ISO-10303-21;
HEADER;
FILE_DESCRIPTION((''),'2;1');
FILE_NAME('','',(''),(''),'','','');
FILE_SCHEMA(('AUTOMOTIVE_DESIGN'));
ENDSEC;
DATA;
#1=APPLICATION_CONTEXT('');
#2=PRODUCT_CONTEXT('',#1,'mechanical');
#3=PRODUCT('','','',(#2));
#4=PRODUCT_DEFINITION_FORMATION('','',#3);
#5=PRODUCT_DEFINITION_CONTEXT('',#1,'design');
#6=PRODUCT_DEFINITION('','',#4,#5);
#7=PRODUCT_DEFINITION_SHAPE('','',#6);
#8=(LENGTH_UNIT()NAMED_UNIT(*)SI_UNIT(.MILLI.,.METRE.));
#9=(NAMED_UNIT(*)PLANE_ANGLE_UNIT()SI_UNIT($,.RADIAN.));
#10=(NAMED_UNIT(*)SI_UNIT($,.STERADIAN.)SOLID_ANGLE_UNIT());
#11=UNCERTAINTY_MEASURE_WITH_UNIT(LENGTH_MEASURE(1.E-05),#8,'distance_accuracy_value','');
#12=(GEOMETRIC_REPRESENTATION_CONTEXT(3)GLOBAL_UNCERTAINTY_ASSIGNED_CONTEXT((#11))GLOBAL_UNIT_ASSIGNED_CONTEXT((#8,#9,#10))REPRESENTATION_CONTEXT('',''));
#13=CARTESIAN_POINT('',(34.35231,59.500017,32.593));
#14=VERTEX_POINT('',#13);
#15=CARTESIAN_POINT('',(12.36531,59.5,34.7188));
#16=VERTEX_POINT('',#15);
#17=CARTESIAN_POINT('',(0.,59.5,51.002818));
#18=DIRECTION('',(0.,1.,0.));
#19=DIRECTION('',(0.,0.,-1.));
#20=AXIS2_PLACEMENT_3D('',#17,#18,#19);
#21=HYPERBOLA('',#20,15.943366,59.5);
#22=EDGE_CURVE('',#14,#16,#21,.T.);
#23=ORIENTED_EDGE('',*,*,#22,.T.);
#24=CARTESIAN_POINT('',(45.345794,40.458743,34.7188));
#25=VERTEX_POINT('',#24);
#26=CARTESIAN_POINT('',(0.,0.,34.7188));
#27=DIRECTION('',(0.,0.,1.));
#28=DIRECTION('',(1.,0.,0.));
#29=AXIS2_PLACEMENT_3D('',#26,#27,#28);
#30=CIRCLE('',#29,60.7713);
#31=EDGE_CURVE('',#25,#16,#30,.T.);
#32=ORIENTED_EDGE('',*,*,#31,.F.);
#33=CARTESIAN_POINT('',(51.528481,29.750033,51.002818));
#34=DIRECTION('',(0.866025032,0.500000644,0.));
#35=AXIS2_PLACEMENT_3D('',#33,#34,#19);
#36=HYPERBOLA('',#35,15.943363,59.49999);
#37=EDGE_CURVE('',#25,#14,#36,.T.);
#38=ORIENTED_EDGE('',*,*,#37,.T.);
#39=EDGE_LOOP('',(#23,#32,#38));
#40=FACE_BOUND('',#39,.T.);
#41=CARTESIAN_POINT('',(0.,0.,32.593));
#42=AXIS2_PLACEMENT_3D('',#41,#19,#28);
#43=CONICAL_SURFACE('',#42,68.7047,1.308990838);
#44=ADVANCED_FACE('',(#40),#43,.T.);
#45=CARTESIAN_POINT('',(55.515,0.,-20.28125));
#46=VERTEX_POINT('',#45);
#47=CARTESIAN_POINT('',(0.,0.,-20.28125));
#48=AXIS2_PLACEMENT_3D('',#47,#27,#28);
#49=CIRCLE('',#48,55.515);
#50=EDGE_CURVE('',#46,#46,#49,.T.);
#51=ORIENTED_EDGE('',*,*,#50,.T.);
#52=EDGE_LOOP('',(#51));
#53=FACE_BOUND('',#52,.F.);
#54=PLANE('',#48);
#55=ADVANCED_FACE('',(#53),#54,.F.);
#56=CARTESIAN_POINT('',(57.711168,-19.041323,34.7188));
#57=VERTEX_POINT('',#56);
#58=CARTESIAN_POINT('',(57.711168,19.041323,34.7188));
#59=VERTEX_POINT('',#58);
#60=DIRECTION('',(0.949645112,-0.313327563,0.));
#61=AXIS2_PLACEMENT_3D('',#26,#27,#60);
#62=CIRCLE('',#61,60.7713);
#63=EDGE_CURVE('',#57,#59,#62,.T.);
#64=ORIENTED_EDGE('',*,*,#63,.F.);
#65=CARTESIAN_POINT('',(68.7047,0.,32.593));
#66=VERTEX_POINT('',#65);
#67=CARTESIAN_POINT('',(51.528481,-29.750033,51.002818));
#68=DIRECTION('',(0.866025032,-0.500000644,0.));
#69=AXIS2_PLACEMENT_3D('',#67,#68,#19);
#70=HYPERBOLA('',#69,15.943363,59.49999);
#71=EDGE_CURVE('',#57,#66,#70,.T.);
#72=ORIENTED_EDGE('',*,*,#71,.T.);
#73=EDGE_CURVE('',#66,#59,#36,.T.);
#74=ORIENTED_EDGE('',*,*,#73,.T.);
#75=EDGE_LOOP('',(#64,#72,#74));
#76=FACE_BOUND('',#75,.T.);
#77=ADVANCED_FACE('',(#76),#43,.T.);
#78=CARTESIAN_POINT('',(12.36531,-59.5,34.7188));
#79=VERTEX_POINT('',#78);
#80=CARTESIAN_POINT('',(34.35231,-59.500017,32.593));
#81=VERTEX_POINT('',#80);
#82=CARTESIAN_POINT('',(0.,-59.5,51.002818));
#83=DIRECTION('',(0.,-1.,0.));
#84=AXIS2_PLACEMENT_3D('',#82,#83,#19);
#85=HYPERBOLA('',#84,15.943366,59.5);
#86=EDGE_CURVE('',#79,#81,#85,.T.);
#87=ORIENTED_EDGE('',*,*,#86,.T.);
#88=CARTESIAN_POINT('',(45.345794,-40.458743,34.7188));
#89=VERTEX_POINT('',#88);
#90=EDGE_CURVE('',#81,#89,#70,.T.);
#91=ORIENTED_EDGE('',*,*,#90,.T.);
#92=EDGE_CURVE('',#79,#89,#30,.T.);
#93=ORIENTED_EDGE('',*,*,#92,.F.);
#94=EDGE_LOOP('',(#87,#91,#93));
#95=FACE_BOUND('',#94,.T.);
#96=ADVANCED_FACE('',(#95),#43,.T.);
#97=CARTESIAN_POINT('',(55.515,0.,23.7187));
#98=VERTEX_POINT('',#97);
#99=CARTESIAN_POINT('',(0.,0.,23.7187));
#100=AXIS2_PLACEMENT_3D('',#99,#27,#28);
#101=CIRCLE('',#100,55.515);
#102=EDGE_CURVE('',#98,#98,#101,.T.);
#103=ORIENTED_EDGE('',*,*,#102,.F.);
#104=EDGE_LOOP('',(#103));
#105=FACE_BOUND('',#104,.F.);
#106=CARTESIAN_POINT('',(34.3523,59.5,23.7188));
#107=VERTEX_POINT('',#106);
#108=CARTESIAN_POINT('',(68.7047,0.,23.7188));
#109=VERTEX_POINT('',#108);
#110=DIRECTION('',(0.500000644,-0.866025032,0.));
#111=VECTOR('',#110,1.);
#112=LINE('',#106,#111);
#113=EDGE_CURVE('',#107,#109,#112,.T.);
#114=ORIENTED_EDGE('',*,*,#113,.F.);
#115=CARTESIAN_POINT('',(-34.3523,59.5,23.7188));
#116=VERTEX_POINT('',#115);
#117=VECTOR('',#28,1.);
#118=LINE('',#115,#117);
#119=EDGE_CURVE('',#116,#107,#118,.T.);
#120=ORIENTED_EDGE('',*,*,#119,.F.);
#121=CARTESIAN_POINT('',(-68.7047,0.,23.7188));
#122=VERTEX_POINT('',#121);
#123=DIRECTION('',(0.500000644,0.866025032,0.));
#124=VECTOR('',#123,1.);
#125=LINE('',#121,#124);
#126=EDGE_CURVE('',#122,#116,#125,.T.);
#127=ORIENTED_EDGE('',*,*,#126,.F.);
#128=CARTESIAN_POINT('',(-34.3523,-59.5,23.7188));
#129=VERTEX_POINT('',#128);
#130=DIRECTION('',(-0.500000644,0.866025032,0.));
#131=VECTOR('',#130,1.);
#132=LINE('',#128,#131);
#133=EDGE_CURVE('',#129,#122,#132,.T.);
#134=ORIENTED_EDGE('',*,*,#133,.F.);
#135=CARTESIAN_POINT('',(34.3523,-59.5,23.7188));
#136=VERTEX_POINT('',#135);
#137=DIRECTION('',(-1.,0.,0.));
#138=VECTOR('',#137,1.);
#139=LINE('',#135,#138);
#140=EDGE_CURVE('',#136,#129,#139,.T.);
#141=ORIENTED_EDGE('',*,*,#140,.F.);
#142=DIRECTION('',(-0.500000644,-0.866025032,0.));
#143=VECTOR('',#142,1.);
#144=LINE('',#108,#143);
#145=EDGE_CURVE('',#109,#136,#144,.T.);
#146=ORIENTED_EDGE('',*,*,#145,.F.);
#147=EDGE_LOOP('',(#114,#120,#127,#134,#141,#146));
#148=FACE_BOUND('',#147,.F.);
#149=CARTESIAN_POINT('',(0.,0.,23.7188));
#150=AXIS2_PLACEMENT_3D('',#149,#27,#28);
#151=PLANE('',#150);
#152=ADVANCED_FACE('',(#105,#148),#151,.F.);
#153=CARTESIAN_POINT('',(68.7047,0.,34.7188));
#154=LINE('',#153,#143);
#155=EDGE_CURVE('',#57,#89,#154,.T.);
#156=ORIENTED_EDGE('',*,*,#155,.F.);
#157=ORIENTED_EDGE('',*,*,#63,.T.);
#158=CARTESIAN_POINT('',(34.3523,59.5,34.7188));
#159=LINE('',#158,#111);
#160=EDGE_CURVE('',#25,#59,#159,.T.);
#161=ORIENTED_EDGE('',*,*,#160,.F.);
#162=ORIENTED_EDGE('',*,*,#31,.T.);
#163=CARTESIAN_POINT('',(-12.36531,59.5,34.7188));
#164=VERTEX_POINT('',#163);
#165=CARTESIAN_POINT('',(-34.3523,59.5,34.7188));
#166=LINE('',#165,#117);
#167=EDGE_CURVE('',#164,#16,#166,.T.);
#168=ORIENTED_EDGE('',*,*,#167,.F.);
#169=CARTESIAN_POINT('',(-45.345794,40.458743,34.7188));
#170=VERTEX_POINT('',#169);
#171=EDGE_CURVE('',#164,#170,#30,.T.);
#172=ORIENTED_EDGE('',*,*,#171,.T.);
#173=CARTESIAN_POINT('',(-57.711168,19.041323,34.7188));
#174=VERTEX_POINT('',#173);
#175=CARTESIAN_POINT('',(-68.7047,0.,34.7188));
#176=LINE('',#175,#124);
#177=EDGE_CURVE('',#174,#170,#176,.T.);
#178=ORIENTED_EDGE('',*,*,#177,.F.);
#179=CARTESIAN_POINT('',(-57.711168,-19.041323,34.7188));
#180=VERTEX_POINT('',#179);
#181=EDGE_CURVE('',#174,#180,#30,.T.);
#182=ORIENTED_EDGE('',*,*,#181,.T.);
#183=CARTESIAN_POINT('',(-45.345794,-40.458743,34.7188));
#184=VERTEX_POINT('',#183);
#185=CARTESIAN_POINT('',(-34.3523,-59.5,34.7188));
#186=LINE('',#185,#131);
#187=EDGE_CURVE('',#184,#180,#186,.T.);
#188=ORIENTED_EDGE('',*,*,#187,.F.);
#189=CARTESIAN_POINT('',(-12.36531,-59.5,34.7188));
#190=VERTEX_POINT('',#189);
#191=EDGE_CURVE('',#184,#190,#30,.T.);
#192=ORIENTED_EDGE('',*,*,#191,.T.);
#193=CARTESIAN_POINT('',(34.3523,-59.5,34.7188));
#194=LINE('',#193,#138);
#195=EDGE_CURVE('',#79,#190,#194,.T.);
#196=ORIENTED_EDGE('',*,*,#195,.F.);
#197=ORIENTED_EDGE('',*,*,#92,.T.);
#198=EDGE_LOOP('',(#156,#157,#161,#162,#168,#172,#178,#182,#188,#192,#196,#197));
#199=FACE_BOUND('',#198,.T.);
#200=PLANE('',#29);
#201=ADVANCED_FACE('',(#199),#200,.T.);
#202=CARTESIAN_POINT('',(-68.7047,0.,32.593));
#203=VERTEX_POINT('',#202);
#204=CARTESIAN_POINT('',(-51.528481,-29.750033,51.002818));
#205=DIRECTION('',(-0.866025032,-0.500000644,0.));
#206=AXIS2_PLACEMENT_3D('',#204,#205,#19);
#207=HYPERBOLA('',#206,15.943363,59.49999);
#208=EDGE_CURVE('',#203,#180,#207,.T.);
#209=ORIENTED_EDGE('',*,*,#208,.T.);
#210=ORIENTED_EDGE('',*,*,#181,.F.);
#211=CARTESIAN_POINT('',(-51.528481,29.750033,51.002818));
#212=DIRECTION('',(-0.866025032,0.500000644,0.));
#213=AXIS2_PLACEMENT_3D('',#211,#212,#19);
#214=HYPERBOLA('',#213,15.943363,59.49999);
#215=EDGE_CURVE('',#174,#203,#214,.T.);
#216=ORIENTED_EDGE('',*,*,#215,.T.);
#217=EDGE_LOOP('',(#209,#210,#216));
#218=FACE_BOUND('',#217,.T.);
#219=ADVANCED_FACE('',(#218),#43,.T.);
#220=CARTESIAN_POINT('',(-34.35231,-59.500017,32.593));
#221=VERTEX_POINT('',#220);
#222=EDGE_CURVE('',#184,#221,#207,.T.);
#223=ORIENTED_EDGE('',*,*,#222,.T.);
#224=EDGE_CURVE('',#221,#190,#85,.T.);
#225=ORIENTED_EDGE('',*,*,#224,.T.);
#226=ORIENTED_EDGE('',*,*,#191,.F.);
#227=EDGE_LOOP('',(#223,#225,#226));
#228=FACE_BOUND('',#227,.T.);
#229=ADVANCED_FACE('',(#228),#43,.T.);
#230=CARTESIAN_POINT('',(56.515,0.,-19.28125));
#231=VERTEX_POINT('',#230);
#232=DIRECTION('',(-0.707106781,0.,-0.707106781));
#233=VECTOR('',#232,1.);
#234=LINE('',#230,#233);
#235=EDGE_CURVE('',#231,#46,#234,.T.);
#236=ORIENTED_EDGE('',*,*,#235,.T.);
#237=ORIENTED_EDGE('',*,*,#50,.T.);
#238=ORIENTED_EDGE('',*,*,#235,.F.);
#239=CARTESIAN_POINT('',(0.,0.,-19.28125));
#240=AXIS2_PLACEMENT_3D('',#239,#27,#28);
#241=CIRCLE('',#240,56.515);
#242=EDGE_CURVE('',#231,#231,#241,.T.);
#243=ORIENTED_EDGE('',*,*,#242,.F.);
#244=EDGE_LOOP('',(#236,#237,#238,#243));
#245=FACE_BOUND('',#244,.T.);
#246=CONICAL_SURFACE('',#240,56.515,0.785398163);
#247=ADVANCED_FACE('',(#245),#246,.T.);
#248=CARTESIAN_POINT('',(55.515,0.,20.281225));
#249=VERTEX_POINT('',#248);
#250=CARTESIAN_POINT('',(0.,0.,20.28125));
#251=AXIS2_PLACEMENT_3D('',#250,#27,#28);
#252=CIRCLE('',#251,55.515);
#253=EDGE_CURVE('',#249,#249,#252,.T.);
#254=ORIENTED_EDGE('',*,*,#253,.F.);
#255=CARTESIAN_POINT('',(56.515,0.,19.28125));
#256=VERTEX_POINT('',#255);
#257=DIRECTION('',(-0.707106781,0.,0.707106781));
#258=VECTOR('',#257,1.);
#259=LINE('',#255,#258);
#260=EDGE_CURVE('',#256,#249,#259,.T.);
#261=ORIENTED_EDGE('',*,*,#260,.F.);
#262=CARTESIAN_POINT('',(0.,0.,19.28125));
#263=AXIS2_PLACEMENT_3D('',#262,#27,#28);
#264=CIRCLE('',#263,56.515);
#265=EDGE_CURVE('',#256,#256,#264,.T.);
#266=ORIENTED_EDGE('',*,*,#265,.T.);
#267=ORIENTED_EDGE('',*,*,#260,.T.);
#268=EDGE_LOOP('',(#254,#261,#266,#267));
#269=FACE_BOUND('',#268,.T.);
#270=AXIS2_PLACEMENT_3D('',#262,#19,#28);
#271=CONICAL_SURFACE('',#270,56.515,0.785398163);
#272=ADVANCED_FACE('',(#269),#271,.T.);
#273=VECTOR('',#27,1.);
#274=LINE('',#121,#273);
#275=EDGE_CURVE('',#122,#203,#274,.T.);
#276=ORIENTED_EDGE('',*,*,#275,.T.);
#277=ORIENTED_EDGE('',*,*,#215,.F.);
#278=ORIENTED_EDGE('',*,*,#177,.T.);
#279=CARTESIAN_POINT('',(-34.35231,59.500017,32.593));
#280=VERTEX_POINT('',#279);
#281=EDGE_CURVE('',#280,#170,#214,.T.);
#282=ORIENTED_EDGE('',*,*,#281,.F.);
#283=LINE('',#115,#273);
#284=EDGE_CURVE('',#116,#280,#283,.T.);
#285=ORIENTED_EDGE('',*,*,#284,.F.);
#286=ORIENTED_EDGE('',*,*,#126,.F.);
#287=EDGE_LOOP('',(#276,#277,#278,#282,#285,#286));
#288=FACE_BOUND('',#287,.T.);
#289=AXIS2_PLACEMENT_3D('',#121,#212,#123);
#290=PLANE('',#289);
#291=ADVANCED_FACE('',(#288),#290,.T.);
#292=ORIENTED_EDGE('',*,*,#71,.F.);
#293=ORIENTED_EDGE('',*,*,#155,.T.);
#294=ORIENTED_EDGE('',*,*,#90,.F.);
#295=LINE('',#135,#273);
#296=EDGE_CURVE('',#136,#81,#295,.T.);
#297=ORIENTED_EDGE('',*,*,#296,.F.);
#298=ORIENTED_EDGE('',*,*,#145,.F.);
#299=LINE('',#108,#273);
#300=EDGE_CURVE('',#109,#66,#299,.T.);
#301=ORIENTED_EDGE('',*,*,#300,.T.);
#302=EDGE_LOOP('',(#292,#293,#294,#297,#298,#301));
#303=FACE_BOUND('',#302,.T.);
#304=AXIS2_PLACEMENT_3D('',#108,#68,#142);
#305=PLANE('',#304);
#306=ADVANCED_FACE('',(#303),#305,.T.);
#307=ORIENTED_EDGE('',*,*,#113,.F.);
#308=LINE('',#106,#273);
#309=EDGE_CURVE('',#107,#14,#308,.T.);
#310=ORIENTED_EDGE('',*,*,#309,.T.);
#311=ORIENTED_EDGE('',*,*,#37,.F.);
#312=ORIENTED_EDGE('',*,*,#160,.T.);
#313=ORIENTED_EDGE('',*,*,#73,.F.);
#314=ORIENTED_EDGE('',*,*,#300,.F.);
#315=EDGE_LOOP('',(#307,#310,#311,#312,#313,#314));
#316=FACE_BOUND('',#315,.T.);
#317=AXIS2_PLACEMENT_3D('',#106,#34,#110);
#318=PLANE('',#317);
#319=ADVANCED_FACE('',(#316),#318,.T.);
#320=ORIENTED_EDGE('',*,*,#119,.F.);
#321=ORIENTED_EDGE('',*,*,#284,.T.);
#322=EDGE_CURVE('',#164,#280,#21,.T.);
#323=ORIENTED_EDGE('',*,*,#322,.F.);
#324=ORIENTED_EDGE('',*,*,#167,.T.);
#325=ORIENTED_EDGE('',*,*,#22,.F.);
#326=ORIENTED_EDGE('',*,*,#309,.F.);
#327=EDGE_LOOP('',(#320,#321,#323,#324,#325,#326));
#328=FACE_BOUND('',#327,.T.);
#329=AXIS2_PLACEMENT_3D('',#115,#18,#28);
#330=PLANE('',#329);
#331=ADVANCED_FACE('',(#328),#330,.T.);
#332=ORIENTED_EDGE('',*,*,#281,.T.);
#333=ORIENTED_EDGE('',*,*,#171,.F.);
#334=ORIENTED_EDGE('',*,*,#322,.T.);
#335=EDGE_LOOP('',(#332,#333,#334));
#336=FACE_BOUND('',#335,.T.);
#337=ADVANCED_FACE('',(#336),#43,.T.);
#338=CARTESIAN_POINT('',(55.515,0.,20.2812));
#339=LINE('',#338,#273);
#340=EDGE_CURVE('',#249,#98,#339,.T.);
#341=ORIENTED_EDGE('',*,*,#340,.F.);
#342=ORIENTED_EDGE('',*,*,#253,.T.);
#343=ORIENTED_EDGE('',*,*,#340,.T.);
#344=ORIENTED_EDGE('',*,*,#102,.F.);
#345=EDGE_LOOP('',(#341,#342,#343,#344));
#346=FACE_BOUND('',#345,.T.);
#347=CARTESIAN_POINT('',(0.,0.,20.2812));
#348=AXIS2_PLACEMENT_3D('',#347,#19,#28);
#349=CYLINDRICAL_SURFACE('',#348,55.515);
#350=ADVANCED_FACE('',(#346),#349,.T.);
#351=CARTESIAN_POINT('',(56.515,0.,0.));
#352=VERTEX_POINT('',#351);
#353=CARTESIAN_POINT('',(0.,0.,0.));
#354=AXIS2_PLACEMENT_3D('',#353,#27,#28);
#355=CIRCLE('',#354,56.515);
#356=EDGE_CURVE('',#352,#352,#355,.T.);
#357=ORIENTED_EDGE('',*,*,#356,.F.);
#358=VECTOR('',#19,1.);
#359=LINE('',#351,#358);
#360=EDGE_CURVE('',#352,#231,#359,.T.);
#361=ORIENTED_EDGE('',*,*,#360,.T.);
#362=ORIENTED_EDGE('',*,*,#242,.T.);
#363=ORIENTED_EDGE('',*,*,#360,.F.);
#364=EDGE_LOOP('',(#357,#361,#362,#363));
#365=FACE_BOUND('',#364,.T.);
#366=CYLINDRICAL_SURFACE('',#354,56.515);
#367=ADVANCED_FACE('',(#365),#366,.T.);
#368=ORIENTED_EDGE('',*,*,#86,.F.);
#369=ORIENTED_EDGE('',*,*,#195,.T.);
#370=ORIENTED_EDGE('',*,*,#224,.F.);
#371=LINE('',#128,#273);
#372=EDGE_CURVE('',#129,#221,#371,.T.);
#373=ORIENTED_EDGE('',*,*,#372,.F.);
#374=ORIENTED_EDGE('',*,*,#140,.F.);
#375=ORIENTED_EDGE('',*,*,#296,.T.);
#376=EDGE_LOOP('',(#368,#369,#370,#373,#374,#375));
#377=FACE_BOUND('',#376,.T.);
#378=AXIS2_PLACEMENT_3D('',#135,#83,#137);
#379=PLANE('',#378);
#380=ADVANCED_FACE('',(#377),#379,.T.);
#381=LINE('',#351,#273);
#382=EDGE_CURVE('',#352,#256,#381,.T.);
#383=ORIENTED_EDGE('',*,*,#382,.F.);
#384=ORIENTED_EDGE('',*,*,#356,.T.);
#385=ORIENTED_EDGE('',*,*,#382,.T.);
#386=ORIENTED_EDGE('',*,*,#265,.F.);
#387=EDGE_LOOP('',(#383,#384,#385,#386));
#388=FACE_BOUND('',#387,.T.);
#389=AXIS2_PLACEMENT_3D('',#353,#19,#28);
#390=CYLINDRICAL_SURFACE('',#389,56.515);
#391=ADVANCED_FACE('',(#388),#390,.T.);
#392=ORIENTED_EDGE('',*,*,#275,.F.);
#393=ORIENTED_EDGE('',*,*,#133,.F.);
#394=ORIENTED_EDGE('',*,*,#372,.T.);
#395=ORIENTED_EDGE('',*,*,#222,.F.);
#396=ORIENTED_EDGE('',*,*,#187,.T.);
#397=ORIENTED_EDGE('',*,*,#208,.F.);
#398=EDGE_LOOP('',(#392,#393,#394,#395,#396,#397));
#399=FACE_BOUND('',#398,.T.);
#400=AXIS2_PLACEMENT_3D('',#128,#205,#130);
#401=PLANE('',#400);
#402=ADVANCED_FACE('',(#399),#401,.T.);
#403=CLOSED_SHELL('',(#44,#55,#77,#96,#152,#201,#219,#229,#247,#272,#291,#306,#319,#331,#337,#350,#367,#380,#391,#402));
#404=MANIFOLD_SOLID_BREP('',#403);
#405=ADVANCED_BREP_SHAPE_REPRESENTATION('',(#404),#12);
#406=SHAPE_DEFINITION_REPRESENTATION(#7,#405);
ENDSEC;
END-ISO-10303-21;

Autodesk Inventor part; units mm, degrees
ref_plane "YZ Plane" through (0, 0, 0) normal (1, 0, 0) x (0, 1, 0)
ref_plane "XZ Plane" through (0, 0, 0) normal (0, 1, 0) x (-1, 0, 0)
ref_plane "XY Plane" through (0, 0, 0) normal (0, 0, 1) x (1, 0, 0)
sketch "Szkic7" plane through (0, 0, 0) normal (0, 0, 1) x (1, 0, 0)
  circle A0 centre (0, 0) radius 56.515
  dimension "d35" = 113.03
extrude "Wyciągnięcie proste2" add sketch "Szkic7" along normal mid plane 40.5625
chamfer "Faza2" distance 1 angle 45 1 edges at (-56.515, 0, 20.2812)
sketch "Szkic9" plane through (0, 0, 20.2812) normal (0, 0, 1) x (1, 0, 0)
  circle A0 centre (0, 0) radius 55.515 projected
extrude "Wyciągnięcie proste3" add sketch "Szkic9" along normal blind 3.4375
sketch "Szkic10" plane through (0, 0, 23.7188) normal (0, 0, 1) x (1, 0, 0)
  line L0 (-34.3523, 59.5) -> (34.3523, 59.5)
  line L1 (34.3523, 59.5) -> (68.7047, 0)
  line L2 (68.7047, 0) -> (34.3523, -59.5)
  line L3 (34.3523, -59.5) -> (-34.3523, -59.5)
  line L4 (-34.3523, -59.5) -> (-68.7047, 0)
  line L5 (-68.7047, 0) -> (-34.3523, 59.5)
  line L6 (0, 79.121) -> (0, -79.121) construction
  line L7 (-79.121, 0) -> (79.121, 0) construction
  point P0 (0, 0)
  point P1 (0, 0)
  point P2 (0, 59.5)
  dimension "d44" = 119
extrude "Wyciągnięcie proste4" add sketch "Szkic10" along normal blind 11
sketch "Szkic12" plane through (0, 0, 0) normal (0, 1, 0) x (-1, 0, 0)
  line L0 (0, -2.1463) -> (0, 12.8775) construction
  line L1 (-34.3523, 23.7188) -> (-34.3523, 34.7188) construction
  line L2 (-68.7047, 34.7188) -> (-34.3523, 34.7188) construction
  line L3 (-68.7047, 23.7188) -> (-68.7047, 34.7188) projected
  line L4 (-68.7047, 32.593) -> (-60.7713, 34.7188)
  line L5 (-68.7047, 34.7188) -> (-34.3523, 34.7188) projected
  line L6 (-68.7047, 23.7188) -> (-34.3523, 23.7188) projected
  point P0 (0, 0)
  dimension "d50" = 15
  dimension "d51" = 7.9333
revolve "Obrót2" cut sketch "Szkic12" angle 360 about axis through (0, 0, -10) along (0, 0, 1)
thread "Gwint3" size "G113.03x2.309" designation "G 4" class "A" standard "ISO Pipe Threads" full length
chamfer "Faza3" distance 1 angle 45 1 edges at (-56.515, 0, -20.2812)
equation "\"d35\" = OD"
equation "\"d36\" = 0.7375 * L"
equation "\"d42\" = 0.0625 * L"
equation "\"d44\" = SW"
equation "\"d45\" = 0.2 * L"
equation "\"d51\" = 0.0666667 * SW"
equation "\"SzerokośćGięciaPodcięcia\" = Grubość"
equation "\"RozmiarPodcięciaNarożnika\" = 4 * Grubość"
equation "\"PromieńPrzejścia\" = PromieńGięcia"
equation "\"Rozmiar_promienia_Jacobiego\" = PromieńGięcia"
equation "\"Wielk_odstępu\" = Grubość"
equation "\"d2\" = PromieńGięcia"
equation "\"d23\" = PromieńGięcia"
equation "\"OD\" = 113.03"
equation "\"SW\" = 119"
equation "\"L\" = 55"
equation "\"Grubość\" = 1.5"
equation "\"PromieńGięcia\" = 3"
properties part number "Korek sześciokątny BSP 4'' L=55" material "304"
